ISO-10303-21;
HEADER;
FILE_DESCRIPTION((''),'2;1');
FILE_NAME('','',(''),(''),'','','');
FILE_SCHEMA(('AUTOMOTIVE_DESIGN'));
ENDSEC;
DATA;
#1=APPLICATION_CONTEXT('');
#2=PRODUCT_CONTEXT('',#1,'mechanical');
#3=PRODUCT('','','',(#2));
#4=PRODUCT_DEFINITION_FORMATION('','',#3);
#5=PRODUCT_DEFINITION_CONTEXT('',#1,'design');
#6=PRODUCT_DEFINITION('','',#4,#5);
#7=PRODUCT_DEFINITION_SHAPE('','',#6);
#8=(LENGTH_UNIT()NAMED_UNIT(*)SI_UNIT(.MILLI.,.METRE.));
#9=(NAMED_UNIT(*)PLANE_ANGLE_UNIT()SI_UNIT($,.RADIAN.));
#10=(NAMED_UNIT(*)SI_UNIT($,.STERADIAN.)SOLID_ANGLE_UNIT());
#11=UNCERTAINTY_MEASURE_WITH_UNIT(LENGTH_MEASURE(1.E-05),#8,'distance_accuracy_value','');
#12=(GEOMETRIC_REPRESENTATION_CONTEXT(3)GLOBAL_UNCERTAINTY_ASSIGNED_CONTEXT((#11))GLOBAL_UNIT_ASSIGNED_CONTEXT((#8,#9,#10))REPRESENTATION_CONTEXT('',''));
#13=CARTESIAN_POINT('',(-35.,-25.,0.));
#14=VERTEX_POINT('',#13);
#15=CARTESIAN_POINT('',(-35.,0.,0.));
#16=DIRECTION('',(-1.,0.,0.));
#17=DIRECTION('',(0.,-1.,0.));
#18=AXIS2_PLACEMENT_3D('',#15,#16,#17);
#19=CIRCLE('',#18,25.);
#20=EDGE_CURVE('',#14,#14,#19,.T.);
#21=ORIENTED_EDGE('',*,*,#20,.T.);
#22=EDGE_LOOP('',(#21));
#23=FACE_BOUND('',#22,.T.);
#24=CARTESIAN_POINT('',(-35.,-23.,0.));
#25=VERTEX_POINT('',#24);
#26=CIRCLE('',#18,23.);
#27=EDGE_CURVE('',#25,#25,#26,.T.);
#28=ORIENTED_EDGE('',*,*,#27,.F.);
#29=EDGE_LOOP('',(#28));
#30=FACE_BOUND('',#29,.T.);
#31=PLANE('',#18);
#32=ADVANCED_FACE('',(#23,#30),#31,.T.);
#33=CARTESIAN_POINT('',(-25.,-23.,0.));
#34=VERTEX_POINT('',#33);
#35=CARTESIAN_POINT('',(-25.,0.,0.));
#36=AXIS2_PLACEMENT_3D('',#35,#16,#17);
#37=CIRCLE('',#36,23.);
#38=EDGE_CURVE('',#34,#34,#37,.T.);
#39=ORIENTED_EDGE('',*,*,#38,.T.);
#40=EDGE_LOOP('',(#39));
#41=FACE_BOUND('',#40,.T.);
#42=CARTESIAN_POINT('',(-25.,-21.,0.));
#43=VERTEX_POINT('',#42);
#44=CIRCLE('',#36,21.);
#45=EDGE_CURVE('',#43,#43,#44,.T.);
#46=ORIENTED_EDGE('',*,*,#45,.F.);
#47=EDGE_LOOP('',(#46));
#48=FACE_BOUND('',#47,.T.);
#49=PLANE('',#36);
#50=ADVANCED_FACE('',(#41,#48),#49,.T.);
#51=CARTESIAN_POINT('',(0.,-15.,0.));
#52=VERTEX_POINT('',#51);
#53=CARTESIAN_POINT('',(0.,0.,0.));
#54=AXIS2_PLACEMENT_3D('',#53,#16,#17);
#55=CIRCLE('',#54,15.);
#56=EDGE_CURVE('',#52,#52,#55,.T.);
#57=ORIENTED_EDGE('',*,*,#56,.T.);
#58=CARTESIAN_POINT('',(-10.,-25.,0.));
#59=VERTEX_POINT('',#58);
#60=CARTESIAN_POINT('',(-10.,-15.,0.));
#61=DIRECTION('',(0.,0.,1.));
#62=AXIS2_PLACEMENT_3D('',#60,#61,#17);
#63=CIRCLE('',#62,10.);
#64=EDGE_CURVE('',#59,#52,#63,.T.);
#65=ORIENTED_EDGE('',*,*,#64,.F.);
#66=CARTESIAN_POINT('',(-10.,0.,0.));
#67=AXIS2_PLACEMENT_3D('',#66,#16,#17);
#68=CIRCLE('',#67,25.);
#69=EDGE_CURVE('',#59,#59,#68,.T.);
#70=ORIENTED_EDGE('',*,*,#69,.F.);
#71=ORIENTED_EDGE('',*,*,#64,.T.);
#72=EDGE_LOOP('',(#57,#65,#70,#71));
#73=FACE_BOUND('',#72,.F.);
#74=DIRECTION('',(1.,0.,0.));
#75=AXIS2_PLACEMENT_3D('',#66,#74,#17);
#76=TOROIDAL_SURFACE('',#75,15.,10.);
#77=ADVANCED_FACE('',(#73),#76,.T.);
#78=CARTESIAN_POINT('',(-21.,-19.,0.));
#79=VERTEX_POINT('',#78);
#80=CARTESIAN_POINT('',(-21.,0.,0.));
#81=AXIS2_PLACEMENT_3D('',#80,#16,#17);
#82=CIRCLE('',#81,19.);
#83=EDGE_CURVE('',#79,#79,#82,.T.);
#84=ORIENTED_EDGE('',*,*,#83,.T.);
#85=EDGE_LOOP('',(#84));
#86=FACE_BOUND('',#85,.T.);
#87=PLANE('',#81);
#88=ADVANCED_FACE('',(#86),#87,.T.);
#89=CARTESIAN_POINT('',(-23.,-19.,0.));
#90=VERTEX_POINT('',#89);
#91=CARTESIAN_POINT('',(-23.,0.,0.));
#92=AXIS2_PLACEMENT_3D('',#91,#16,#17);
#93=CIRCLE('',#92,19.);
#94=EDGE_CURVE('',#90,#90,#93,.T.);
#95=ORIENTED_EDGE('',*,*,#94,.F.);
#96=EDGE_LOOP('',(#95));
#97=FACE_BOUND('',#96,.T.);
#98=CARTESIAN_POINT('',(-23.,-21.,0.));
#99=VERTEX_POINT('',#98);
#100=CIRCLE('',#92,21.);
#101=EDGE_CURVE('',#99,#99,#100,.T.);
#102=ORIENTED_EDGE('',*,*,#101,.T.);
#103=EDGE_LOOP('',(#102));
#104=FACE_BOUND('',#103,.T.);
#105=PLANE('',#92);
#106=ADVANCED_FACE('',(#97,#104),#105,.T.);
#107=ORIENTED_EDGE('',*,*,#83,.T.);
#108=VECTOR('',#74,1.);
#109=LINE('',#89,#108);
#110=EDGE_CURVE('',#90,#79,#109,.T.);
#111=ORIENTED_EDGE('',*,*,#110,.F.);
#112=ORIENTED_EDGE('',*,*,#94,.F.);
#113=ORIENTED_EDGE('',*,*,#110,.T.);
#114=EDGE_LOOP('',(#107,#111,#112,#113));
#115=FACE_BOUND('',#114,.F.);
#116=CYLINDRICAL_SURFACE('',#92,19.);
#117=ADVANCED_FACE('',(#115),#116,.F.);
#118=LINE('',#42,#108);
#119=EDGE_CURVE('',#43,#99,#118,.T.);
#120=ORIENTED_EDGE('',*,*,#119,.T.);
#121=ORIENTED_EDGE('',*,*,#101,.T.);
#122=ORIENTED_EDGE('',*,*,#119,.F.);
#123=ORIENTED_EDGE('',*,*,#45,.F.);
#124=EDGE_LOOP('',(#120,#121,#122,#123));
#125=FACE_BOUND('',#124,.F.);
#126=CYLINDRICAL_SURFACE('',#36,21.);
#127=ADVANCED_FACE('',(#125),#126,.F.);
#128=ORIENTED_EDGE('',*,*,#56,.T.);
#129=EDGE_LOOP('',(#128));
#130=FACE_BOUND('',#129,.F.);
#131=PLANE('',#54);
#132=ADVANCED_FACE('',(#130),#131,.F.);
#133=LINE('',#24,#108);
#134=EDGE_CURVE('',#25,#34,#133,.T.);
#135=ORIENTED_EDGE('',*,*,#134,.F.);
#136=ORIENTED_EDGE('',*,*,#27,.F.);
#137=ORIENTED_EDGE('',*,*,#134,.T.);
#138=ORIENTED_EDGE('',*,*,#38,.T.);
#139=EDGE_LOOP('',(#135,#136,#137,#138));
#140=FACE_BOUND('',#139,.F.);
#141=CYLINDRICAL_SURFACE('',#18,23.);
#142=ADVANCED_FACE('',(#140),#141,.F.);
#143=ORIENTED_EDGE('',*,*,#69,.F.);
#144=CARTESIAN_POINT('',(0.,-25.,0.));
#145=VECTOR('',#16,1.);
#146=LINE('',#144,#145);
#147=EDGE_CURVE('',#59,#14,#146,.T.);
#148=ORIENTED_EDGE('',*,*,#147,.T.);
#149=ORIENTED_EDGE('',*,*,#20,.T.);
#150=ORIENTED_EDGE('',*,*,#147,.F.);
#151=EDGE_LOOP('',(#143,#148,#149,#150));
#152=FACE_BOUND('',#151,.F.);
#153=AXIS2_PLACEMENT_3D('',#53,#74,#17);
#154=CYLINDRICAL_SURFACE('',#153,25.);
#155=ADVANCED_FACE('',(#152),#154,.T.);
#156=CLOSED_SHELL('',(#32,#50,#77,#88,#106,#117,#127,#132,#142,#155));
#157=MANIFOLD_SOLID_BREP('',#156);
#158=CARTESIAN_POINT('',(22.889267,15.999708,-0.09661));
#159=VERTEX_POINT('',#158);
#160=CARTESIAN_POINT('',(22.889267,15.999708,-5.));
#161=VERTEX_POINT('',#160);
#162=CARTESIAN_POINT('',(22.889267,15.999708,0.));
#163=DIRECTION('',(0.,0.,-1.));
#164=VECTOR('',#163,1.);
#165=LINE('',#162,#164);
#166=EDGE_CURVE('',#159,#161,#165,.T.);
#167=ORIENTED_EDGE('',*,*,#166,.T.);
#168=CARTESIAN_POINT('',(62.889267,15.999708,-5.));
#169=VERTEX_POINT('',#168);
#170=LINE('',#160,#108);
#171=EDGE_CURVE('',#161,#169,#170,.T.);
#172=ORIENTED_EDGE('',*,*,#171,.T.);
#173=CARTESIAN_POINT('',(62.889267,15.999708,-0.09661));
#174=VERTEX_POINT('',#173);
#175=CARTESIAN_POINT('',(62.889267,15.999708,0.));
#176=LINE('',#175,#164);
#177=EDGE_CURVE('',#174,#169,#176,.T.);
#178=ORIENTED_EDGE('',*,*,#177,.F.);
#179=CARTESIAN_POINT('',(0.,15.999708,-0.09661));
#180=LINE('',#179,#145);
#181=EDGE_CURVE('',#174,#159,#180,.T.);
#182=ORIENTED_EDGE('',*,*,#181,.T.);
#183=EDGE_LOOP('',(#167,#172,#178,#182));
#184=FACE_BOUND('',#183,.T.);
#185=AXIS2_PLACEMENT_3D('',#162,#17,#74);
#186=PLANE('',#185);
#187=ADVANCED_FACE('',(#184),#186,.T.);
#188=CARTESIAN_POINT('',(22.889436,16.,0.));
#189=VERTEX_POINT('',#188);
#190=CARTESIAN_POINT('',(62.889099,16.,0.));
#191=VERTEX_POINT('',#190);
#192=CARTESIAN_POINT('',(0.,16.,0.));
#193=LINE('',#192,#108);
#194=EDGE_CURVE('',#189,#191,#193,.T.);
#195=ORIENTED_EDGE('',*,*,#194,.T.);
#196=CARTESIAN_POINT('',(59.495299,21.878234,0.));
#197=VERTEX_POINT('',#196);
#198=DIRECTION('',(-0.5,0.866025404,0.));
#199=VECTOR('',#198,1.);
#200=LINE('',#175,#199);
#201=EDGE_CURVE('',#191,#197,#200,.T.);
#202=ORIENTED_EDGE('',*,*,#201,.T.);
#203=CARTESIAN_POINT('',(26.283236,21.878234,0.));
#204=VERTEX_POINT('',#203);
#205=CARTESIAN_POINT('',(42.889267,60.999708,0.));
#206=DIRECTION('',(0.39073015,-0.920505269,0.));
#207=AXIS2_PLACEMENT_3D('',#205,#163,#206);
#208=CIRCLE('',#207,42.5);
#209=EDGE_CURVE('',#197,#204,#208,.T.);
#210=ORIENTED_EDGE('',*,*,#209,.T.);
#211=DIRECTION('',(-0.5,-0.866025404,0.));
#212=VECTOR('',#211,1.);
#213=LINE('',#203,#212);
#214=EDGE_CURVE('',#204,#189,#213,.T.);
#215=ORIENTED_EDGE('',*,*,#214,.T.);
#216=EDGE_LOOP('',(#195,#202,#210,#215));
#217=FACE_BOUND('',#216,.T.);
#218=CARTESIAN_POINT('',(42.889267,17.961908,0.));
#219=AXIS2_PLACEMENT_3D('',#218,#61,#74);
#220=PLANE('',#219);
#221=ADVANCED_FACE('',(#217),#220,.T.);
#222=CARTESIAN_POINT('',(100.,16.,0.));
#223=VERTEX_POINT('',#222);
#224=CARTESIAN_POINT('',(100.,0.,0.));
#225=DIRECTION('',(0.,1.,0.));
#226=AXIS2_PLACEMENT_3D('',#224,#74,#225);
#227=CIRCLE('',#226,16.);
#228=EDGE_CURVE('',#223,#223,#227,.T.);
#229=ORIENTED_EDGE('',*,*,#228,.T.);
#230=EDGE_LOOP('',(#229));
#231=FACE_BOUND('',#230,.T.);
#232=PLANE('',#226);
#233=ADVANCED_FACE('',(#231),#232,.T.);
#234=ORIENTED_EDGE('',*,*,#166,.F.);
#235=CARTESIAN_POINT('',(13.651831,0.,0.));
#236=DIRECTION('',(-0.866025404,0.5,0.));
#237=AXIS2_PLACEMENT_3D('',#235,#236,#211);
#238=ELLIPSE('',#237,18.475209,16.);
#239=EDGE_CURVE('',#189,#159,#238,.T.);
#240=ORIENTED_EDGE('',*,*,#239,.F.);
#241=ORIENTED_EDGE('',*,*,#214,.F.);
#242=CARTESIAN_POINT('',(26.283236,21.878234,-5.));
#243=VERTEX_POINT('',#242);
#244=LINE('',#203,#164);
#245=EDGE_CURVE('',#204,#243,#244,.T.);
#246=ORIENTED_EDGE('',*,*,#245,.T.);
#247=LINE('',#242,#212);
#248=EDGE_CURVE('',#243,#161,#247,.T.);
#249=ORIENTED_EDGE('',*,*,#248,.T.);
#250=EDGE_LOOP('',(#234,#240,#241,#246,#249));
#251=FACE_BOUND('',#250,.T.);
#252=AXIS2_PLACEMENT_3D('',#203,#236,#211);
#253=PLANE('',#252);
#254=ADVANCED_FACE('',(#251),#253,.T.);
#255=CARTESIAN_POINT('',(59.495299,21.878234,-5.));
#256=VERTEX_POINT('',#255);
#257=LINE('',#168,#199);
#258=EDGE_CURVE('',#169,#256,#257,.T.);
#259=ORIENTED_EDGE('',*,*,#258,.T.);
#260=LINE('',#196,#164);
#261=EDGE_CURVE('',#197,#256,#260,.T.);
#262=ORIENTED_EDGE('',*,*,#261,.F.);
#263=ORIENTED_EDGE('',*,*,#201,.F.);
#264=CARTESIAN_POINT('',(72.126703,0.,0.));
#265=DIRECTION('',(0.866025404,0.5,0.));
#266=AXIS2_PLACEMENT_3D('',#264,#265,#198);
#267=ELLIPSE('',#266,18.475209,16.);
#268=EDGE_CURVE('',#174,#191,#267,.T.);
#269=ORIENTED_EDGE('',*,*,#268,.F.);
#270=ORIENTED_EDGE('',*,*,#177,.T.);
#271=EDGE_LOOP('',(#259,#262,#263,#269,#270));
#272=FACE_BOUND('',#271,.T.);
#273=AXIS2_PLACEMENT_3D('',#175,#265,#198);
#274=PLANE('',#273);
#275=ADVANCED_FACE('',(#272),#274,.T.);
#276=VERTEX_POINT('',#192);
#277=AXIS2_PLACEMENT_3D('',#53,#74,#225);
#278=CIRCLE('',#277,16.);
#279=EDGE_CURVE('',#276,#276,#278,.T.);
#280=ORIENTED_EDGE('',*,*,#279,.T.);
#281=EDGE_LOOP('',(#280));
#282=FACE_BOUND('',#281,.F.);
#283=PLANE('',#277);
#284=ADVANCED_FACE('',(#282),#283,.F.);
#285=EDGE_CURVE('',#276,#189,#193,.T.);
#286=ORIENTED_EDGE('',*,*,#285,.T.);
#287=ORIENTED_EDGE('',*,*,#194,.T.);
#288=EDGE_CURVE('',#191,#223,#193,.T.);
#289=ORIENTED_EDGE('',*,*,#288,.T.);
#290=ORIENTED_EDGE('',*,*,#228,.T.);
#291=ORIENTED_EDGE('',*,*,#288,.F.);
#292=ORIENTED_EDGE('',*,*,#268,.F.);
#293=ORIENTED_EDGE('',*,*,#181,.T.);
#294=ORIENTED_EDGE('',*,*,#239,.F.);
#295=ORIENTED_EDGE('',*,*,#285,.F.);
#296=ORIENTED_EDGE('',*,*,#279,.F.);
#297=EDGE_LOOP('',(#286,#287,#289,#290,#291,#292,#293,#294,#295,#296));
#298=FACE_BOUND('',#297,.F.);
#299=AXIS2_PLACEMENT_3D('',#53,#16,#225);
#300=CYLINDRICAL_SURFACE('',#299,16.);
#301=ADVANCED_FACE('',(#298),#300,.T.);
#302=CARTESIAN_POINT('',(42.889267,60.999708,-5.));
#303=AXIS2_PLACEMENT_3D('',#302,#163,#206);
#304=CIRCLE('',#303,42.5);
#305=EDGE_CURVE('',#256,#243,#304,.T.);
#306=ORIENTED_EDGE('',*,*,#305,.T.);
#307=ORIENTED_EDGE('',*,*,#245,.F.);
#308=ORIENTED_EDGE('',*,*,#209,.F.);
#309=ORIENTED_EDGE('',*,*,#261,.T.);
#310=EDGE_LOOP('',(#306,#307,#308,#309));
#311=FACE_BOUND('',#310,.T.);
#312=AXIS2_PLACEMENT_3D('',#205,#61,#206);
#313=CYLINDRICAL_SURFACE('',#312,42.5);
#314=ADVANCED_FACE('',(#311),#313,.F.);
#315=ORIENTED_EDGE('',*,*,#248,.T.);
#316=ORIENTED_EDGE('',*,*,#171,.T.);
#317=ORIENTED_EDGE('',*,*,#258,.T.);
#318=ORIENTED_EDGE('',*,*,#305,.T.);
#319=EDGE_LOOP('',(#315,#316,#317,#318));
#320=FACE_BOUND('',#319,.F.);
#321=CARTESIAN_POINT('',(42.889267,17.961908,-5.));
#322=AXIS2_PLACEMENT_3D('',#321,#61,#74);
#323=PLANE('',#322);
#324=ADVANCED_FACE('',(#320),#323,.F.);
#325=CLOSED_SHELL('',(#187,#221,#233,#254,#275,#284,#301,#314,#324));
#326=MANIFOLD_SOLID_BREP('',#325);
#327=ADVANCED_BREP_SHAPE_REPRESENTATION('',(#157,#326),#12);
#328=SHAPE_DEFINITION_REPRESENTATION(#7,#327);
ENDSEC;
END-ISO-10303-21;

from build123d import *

# Parameters (mm, degrees)
F0_R      = 16
F1_DEPTH  = 100
F2_R      = 25
F3_DEPTH  = 35
F4_R      = 23
F5_DEPTH  = 10
F6_R      = 21
F7_DEPTH  = 2
F8_R      = 19
F9_DEPTH  = 2
F10_R     = 10
F12_DEPTH = 5


# Not quite as in the source:
# - a feature names something its author has since deleted; it is built from what else it names


with BuildPart() as f1:
    # F0 (on Right) → F1 (new body)
    with BuildSketch(Plane.YZ):
        Circle(F0_R)
    extrude(amount=F1_DEPTH)

    # F11 (on Top) → F12 (join)
    with BuildSketch(Plane.XY):
        with BuildLine():
            ThreePointArc((59.4952985912, 21.8782344051), (42.8892672062, 18.4997083247), (26.2832358212, 21.8782344051))
            Line((26.2832358212, 21.8782344051), (22.8892672062, 15.9997083247))
            Line((22.8892672062, 15.9997083247), (62.8892672062, 15.9997083247))
            Line((62.8892672062, 15.9997083247), (59.4952985912, 21.8782344051))
        make_face()
    extrude(amount=-F12_DEPTH)


with BuildPart() as f3:
    # F2 (on face) → F3 (new body)
    with BuildSketch(Plane(origin=(0, 0, 0), x_dir=(0, -1, 0), z_dir=(-1, 0, 0))):
        Circle(F2_R)
    extrude(amount=F3_DEPTH)

    # F4 (on face) → F5 (cut)
    with BuildSketch(Plane(origin=(-35, 0, 0), x_dir=(0, -1, 0), z_dir=(-1, 0, 0))):
        Circle(F4_R)
    extrude(amount=-F5_DEPTH, mode=Mode.SUBTRACT)

    # F6 (on face) → F7 (cut)
    with BuildSketch(Plane(origin=(-25, 0, 0), x_dir=(0, -1, 0), z_dir=(-1, 0, 0))):
        Circle(F6_R)
    extrude(amount=-F7_DEPTH, mode=Mode.SUBTRACT)

    # F8 (on face) → F9 (cut)
    with BuildSketch(Plane(origin=(-23, 0, 0), x_dir=(0, -1, 0), z_dir=(-1, 0, 0))):
        Circle(F8_R)
    extrude(amount=-F9_DEPTH, mode=Mode.SUBTRACT)

    # F10
    f10_edges = [f3.edges().sort_by_distance(p)[0] for p in [
        (0, 25, 0),
    ]]
    fillet(f10_edges, radius=F10_R)


solid = Compound([f1.part, f3.part])
